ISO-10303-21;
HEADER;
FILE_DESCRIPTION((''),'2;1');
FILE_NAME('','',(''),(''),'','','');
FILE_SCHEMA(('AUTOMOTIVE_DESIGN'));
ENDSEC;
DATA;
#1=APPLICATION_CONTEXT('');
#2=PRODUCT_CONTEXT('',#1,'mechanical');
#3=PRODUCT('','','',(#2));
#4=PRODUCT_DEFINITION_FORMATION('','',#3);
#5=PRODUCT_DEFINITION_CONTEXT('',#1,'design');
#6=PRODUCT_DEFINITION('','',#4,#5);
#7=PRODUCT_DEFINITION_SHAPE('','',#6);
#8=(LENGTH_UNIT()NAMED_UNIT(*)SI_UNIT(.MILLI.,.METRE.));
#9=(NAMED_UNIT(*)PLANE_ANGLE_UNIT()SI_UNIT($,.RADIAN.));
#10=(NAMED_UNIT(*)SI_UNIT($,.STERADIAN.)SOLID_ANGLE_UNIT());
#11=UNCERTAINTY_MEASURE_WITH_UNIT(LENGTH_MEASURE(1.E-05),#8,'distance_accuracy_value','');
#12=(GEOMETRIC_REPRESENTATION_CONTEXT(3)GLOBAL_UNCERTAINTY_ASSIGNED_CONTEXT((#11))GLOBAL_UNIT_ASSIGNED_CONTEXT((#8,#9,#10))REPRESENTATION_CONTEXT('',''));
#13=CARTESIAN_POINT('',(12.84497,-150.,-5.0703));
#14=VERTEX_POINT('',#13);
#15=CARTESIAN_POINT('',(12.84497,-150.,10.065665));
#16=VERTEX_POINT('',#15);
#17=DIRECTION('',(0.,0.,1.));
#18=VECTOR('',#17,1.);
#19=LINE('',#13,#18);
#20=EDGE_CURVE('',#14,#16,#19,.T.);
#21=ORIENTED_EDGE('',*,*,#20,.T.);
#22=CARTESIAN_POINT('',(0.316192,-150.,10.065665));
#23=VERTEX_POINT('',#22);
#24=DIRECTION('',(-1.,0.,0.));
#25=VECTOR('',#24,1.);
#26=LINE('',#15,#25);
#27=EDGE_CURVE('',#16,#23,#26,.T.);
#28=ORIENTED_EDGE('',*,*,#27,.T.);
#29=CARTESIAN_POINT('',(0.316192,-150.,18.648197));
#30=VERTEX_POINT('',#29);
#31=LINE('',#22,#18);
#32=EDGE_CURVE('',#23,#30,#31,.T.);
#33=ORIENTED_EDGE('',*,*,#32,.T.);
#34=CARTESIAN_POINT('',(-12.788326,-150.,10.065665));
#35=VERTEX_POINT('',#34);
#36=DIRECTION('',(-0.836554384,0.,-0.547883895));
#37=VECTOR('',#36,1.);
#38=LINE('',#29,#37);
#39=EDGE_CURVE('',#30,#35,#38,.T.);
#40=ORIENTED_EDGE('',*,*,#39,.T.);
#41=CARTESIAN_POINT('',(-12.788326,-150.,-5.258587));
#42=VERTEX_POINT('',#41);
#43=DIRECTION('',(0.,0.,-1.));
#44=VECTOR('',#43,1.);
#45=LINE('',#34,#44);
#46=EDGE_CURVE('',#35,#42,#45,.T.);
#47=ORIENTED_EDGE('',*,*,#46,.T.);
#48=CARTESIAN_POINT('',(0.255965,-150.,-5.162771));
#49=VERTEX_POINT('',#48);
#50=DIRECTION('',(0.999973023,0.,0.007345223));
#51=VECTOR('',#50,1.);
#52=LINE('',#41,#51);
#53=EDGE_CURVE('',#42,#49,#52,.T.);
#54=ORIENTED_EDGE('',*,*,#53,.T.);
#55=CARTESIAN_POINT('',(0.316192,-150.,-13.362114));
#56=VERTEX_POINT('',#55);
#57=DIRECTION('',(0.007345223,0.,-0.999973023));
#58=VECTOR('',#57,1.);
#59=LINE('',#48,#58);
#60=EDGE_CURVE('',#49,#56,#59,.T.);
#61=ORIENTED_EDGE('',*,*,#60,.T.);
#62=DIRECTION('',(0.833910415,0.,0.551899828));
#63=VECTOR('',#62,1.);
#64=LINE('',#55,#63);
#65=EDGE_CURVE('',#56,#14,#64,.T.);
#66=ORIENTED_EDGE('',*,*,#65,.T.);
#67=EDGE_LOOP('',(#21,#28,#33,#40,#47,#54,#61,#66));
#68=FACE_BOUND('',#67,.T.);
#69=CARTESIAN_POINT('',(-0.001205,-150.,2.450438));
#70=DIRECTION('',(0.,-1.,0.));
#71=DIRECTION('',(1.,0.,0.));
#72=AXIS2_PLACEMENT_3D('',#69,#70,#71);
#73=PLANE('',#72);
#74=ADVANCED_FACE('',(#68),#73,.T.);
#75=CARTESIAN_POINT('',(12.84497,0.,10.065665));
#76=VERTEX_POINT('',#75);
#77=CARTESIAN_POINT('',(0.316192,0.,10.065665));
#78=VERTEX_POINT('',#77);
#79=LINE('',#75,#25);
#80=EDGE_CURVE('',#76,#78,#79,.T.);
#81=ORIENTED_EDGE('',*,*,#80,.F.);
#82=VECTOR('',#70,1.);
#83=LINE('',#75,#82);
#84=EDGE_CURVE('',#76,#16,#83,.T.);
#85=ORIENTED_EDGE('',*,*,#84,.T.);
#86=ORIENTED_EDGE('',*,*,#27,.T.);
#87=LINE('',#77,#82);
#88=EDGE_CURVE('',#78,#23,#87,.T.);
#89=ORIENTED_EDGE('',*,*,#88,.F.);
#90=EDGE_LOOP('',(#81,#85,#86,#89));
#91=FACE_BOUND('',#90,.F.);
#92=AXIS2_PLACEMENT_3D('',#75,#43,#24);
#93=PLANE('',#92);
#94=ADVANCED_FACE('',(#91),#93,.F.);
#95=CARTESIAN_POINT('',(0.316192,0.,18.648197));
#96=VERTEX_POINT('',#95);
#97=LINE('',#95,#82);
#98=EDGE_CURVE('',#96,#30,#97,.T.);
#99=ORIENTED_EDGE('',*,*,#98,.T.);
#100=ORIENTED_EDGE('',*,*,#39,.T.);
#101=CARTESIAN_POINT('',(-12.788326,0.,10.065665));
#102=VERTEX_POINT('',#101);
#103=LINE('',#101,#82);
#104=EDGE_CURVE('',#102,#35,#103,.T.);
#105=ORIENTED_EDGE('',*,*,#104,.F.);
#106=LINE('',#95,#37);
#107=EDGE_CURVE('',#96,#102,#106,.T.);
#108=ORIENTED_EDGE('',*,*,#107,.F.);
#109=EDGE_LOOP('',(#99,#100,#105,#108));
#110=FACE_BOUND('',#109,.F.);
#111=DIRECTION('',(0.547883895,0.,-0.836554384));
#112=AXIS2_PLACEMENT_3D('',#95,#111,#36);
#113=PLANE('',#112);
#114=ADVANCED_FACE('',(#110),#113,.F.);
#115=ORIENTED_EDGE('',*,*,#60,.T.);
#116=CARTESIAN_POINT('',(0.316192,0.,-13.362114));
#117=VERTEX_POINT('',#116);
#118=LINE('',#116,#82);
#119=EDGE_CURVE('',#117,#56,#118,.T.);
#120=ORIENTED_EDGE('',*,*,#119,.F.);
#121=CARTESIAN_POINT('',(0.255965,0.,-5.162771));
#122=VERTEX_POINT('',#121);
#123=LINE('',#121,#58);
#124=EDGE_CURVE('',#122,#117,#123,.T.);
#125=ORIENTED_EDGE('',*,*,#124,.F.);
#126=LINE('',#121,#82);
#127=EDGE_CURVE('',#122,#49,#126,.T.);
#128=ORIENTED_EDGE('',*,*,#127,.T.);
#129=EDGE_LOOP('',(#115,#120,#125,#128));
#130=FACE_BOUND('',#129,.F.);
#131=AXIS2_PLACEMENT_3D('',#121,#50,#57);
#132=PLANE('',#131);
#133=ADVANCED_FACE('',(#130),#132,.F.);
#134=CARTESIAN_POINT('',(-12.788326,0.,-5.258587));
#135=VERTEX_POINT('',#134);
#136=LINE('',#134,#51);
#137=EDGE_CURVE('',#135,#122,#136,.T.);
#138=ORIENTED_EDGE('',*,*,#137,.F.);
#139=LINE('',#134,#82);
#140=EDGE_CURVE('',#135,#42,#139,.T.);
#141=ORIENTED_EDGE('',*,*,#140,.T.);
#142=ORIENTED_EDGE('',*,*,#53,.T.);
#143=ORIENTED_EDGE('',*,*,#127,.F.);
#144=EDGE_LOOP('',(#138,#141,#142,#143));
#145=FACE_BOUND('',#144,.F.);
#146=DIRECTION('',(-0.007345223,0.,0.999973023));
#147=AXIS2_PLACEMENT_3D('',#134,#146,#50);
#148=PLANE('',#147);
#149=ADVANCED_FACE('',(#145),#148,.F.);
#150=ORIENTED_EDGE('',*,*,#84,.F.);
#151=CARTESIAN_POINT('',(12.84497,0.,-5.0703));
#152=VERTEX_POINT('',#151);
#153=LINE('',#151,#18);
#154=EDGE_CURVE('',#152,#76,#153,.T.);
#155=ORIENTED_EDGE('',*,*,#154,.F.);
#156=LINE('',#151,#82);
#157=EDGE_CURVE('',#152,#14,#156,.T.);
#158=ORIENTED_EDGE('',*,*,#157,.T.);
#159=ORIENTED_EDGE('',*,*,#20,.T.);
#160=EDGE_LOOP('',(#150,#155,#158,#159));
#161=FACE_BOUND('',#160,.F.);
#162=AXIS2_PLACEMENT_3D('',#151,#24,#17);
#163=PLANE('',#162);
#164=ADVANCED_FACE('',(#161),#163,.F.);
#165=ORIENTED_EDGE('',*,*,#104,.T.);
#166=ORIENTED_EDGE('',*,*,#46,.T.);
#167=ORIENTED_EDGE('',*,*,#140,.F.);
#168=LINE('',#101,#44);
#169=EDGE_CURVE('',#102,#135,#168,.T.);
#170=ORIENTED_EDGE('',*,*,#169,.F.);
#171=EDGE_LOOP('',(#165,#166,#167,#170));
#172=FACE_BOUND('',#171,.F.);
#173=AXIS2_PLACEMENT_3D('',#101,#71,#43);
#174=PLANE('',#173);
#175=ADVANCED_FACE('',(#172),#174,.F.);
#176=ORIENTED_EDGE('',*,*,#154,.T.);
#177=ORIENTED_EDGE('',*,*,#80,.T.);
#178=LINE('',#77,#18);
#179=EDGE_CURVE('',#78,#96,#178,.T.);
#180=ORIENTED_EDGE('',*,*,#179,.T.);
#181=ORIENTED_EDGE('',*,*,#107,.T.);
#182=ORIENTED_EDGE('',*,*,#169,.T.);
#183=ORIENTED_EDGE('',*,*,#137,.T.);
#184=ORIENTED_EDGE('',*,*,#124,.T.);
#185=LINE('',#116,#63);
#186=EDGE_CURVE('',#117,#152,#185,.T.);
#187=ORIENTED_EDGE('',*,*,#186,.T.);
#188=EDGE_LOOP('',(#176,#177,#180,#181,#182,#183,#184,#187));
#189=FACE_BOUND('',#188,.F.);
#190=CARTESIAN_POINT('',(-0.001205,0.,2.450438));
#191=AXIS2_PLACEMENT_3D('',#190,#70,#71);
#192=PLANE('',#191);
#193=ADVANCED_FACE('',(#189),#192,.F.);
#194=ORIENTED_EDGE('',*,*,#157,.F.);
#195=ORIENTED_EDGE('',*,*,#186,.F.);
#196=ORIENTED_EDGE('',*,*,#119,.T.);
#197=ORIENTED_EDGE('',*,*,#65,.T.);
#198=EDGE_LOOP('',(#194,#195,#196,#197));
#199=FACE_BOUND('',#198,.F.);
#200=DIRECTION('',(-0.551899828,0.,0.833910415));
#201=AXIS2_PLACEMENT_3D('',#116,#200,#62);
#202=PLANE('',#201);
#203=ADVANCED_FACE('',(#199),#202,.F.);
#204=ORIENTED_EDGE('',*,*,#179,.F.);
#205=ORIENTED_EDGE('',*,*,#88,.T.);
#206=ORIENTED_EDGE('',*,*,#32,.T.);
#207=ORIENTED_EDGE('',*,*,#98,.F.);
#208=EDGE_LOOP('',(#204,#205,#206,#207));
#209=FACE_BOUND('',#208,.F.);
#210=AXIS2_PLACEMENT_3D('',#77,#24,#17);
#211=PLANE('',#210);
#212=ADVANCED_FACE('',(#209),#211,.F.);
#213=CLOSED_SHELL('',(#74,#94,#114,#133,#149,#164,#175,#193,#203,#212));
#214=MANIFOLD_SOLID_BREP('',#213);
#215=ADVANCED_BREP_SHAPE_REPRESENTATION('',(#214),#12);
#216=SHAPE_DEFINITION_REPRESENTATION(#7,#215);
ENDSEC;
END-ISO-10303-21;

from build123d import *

# Parameters (mm, degrees)
F1_DEPTH = 150


# Not quite as in the source:
# - a feature of the source that left no trace in its solid (it failed there, or was rolled back) is left out


with BuildPart() as f1:
    # F0 (on Front) → F1 (new body)
    with BuildSketch(Plane.XZ):
        Polygon((0.316192396, 10.0656654686), (-12.7883255482, 10.0656654686), (-12.7883255482, -5.258587189), (0.2559647712, -5.1627713866), (12.8449704498, -5.0702998415), (12.8449704498, 10.0656654686), align=None)
        Polygon((0.316192396, 18.6481969431), (-12.7883255482, 10.0656654686), (0.316192396, 10.0656654686), align=None)
        Polygon((12.8449704498, -5.0702998415), (0.2559647712, -5.1627713866), (0.316192396, -13.3621143177), align=None)
    extrude(amount=F1_DEPTH)


solid = f1.part
